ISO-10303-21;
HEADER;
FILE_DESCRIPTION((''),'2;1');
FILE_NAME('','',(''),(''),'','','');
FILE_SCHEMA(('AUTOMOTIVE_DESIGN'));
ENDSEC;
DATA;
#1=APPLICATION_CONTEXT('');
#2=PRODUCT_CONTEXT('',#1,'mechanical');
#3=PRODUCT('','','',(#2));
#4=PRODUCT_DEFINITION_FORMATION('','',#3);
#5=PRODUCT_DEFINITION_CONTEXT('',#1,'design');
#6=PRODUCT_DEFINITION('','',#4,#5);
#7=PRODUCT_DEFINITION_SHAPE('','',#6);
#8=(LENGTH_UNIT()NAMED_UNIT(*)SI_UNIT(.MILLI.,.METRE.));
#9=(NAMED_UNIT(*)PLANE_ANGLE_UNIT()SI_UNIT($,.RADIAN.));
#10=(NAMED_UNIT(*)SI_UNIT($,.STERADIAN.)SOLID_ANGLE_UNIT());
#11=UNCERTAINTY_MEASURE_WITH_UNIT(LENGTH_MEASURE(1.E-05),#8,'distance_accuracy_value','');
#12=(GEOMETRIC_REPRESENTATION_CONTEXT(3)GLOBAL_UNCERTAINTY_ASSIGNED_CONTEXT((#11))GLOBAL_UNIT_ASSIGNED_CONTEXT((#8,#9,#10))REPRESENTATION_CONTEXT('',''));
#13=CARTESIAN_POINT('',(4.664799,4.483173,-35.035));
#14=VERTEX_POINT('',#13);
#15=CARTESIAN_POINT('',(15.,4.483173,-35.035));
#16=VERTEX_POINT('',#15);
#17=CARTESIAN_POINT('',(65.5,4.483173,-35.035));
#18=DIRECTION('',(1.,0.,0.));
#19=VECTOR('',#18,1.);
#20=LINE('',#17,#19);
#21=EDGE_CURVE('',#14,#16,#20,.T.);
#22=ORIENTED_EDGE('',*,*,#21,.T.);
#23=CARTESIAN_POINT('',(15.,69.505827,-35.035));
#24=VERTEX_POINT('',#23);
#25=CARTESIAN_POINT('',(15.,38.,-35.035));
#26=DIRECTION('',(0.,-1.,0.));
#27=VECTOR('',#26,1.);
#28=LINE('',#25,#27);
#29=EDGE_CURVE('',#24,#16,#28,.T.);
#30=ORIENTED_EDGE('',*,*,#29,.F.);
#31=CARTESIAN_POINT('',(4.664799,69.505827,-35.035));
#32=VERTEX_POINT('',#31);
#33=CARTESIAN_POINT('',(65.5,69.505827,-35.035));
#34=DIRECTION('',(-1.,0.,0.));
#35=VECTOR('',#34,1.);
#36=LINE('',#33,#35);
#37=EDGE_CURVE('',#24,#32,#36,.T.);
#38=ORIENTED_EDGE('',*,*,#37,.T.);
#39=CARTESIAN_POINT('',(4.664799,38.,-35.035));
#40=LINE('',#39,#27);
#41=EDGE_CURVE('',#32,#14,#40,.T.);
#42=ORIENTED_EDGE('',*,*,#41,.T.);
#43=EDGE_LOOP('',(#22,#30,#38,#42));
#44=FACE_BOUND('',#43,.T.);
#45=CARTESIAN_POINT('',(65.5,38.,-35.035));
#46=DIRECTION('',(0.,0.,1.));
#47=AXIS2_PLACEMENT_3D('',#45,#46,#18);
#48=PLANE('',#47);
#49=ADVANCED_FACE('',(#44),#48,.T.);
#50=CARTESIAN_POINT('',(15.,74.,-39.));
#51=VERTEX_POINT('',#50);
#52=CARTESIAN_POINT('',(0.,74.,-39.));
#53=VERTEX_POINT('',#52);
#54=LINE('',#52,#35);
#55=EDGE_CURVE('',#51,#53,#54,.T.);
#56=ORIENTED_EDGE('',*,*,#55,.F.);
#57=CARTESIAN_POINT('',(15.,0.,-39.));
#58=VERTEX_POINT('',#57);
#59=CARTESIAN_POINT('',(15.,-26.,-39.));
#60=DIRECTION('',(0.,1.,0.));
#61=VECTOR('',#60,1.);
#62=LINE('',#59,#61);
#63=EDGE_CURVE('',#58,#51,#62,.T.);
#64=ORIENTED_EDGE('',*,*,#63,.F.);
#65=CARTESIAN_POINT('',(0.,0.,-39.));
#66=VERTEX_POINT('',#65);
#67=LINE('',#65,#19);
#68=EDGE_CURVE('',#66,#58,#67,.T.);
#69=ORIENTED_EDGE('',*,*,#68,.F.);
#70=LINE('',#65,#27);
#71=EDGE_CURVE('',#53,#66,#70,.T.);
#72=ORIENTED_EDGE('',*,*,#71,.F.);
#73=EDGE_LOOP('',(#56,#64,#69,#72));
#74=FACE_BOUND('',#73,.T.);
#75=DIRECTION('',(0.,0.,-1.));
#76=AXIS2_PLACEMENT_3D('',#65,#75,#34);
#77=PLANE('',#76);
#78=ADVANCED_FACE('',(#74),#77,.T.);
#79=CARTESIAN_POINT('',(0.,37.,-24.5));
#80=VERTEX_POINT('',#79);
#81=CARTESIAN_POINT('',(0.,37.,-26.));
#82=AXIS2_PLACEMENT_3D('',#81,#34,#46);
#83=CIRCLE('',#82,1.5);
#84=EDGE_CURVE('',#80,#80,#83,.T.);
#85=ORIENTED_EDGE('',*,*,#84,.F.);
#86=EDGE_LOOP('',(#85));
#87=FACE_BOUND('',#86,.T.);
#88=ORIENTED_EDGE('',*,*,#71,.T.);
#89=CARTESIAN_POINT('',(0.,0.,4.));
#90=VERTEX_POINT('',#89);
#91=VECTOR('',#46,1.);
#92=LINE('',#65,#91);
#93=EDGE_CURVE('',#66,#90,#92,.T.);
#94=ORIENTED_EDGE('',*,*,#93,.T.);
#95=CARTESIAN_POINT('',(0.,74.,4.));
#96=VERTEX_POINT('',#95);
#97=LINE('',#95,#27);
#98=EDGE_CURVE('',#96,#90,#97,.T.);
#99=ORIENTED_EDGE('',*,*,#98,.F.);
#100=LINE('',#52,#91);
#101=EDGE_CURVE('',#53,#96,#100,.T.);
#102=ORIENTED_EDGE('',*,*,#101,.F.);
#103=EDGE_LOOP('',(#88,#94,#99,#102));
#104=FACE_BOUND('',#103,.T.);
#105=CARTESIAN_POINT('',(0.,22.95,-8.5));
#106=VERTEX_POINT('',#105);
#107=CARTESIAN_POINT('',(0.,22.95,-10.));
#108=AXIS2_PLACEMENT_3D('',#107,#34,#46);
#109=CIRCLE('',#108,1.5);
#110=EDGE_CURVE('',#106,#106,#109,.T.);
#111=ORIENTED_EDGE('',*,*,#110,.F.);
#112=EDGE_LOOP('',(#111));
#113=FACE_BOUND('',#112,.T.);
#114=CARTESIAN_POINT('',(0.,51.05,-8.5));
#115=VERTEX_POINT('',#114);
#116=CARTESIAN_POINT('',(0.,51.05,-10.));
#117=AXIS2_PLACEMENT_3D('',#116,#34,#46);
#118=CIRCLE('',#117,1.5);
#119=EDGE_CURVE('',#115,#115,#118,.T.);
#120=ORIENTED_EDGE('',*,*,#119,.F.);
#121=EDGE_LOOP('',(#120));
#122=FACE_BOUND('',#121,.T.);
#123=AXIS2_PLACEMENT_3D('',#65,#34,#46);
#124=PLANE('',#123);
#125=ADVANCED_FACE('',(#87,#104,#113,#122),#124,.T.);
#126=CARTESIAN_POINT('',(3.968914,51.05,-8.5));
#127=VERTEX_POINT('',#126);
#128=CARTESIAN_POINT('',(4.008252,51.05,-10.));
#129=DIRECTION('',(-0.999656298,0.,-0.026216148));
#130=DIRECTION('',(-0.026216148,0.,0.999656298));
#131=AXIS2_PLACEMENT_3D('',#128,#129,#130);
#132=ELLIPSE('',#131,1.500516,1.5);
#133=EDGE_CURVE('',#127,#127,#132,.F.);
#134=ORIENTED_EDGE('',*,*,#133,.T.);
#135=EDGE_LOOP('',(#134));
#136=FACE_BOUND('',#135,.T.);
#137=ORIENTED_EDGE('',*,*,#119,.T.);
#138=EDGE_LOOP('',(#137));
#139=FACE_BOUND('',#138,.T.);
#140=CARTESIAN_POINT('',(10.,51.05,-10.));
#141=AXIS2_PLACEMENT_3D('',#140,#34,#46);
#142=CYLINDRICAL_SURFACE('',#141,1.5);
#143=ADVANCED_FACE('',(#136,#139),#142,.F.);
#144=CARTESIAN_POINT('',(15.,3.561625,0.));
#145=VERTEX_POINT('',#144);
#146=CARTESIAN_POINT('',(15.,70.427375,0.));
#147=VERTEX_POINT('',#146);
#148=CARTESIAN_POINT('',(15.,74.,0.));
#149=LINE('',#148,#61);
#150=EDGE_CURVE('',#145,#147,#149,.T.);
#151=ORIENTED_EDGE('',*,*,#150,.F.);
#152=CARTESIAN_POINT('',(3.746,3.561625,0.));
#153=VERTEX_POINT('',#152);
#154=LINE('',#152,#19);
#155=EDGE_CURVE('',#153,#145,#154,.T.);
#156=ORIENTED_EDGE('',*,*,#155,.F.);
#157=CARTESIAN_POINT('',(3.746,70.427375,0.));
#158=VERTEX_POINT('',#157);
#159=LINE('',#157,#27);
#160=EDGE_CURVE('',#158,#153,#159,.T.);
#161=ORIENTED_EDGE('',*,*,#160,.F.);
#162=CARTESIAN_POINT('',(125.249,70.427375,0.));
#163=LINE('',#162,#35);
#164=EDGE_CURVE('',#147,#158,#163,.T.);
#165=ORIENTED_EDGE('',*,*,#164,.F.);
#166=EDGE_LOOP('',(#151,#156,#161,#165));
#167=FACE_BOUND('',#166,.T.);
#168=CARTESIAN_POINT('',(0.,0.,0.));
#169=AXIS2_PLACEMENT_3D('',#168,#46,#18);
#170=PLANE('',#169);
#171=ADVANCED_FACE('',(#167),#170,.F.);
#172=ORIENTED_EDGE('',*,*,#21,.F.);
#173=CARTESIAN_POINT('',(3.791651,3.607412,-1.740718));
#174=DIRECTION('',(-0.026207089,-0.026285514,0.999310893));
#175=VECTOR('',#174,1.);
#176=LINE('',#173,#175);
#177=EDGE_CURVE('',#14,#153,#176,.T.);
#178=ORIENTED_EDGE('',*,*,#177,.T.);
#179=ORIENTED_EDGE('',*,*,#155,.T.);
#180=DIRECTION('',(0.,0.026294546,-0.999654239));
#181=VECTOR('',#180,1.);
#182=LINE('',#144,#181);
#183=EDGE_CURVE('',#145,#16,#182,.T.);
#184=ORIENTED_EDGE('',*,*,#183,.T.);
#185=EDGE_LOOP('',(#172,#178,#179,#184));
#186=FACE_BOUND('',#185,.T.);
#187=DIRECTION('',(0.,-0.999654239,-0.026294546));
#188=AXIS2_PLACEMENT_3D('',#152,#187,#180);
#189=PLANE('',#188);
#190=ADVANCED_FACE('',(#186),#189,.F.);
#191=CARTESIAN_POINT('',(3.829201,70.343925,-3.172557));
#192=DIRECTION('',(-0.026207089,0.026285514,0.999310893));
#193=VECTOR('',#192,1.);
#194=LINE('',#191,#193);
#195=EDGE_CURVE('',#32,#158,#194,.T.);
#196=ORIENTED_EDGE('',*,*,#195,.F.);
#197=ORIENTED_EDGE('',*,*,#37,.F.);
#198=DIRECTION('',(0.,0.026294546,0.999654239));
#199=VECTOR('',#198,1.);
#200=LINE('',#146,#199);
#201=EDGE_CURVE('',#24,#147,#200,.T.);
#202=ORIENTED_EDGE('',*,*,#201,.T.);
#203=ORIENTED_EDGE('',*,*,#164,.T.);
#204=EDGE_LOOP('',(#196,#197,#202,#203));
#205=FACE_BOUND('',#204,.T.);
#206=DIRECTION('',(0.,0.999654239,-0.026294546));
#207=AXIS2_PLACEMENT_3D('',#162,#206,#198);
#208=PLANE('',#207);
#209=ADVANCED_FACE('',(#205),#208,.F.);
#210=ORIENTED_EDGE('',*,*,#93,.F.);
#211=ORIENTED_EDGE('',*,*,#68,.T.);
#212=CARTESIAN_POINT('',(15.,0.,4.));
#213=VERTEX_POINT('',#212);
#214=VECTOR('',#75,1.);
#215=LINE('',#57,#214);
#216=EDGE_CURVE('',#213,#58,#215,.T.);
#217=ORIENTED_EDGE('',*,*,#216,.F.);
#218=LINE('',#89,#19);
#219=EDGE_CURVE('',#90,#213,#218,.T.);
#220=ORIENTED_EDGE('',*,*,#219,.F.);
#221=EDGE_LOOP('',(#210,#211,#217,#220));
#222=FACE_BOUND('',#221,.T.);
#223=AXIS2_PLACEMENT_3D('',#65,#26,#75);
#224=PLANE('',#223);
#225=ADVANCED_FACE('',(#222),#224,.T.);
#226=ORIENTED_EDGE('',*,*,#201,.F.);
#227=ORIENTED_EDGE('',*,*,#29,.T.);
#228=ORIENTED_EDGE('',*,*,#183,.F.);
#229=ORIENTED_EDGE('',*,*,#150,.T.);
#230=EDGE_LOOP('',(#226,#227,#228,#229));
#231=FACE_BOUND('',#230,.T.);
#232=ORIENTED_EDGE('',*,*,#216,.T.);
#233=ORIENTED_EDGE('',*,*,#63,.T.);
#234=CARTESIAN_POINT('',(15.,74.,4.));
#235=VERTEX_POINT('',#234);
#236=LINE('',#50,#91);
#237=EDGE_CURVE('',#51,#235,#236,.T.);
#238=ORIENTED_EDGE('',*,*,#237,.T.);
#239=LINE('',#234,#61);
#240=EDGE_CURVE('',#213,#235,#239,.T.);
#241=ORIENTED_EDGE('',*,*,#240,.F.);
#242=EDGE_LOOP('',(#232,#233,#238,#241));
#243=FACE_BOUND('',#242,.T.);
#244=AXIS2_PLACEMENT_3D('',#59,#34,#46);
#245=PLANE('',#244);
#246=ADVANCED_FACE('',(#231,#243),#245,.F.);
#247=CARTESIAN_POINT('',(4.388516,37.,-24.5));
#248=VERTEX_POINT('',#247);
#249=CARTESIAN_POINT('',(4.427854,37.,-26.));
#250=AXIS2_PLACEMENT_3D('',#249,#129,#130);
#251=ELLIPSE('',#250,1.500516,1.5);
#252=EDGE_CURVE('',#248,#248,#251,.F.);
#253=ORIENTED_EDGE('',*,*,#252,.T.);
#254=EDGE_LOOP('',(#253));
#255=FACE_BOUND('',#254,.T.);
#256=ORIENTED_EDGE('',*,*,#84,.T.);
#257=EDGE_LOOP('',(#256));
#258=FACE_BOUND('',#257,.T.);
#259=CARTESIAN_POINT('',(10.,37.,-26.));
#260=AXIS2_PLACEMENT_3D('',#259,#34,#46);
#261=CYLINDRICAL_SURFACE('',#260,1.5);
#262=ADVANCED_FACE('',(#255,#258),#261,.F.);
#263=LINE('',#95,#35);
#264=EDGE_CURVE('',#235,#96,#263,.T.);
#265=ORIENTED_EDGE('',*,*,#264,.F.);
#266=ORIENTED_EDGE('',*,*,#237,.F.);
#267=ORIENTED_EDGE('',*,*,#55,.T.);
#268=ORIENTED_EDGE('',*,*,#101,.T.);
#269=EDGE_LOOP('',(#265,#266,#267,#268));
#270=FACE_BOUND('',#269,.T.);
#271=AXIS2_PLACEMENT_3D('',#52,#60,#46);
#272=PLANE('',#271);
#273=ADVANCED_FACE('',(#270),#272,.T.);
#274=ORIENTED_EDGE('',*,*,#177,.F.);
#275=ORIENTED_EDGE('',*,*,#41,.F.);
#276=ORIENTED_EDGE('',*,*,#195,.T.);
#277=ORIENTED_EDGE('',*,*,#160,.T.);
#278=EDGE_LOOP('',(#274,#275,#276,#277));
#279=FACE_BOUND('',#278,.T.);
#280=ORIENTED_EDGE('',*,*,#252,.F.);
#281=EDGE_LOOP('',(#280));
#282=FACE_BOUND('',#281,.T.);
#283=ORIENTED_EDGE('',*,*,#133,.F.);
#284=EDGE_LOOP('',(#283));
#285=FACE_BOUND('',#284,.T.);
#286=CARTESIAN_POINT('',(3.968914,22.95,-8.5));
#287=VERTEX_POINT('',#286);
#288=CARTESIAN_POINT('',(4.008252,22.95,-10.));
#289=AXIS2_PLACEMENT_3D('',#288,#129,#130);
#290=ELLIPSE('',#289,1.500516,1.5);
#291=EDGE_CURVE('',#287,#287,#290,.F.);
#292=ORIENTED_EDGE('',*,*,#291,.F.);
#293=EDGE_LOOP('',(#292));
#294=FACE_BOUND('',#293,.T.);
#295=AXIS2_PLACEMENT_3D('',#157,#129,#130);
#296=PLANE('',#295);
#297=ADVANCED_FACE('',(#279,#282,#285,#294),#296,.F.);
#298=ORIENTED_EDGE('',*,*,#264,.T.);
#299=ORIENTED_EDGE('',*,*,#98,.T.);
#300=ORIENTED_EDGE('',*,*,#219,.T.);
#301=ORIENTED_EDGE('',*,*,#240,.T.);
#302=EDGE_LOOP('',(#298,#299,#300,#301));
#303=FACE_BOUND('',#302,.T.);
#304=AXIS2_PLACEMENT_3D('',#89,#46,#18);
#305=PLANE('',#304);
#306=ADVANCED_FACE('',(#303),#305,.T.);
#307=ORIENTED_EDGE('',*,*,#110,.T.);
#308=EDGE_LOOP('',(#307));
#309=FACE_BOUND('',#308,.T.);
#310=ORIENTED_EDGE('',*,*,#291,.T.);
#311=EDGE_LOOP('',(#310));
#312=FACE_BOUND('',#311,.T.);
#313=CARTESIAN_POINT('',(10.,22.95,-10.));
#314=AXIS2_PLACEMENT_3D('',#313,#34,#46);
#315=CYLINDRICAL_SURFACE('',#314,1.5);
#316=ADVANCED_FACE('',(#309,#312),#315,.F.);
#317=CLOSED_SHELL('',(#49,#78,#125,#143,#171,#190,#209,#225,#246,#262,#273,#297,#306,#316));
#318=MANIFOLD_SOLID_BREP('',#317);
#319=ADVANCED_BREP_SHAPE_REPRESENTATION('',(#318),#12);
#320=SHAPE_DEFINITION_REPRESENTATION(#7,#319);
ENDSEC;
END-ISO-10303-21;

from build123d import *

# Parameters (mm, degrees)
SKETCH1_W           = 129
SKETCH1_H           = 74
BOSS_EXTRUDE1_DEPTH = 39
SKETCH3_R           = 1.5
CUT_EXTRUDE2_DEPTH  = 10
CAVITY1_START       = 3.561625
CAVITY1_DEPTH       = 66.86575
CAVITY1_START_2     = 3
CAVITY1_2_DEPTH     = 123
SKETCH4_W           = 114
SKETCH4_H           = 39
CUT_EXTRUDE3_DEPTH  = 100
SKETCH5_W           = 15
SKETCH5_H           = 74
BOSS_EXTRUDE2_DEPTH = 4


with BuildPart() as part:
    # Sketch1 → Boss-Extrude1 (new body)
    with BuildSketch(Plane.XY):
        with Locations((64.5, 37)):
            Rectangle(SKETCH1_W, SKETCH1_H)
    extrude(amount=-BOSS_EXTRUDE1_DEPTH)

    # Sketch3 → Cut-Extrude2 (cut)
    with BuildSketch(Plane.ZY):
        with Locations((-10, 51.05)):
            Circle(SKETCH3_R)
        with Locations((-10, 22.95)):
            Circle(SKETCH3_R)
        with Locations((-26, 37)):
            Circle(SKETCH3_R)
    extrude(amount=-CUT_EXTRUDE2_DEPTH, mode=Mode.SUBTRACT)

    # Cavity1: read off the stored shape, not the designer's step
    # Cavity1 outline → Cavity1 (cut)
    with BuildSketch(Plane(origin=(0, 0, 0), x_dir=(1, 0, 0), z_dir=(0, 1, 0)).offset(CAVITY1_START)):
        Polygon((124.330201477, 35.035), (4.664798523, 35.035), (3.746, 0), (125.249, 0), align=None)
    extrude(amount=CAVITY1_DEPTH, mode=Mode.SUBTRACT)

    # Cavity1 2 outline → Cavity1 2 (add)
    with BuildSketch(Plane.YZ.offset(CAVITY1_START_2)):
        Polygon((70.427375, 0), (69.505826955, -35.035), (70.427375, -35.035), align=None)
        Polygon((4.483173045, -35.035), (3.561625, 0), (3.561625, -35.035), align=None)
    extrude(amount=CAVITY1_2_DEPTH)

    # Sketch4 → Cut-Extrude3 (cut)
    with BuildSketch(Plane(origin=(0, 74, 0), x_dir=(1, 0, 0), z_dir=(0, 1, 0))):
        with Locations((72, 19.5)):
            Rectangle(SKETCH4_W, SKETCH4_H)
    extrude(amount=-CUT_EXTRUDE3_DEPTH, mode=Mode.SUBTRACT)

    # Sketch5 → Boss-Extrude2 (add)
    with BuildSketch(Plane.XY):
        with Locations((7.5, 37)):
            Rectangle(SKETCH5_W, SKETCH5_H)
    extrude(amount=BOSS_EXTRUDE2_DEPTH)


solid = part.part
